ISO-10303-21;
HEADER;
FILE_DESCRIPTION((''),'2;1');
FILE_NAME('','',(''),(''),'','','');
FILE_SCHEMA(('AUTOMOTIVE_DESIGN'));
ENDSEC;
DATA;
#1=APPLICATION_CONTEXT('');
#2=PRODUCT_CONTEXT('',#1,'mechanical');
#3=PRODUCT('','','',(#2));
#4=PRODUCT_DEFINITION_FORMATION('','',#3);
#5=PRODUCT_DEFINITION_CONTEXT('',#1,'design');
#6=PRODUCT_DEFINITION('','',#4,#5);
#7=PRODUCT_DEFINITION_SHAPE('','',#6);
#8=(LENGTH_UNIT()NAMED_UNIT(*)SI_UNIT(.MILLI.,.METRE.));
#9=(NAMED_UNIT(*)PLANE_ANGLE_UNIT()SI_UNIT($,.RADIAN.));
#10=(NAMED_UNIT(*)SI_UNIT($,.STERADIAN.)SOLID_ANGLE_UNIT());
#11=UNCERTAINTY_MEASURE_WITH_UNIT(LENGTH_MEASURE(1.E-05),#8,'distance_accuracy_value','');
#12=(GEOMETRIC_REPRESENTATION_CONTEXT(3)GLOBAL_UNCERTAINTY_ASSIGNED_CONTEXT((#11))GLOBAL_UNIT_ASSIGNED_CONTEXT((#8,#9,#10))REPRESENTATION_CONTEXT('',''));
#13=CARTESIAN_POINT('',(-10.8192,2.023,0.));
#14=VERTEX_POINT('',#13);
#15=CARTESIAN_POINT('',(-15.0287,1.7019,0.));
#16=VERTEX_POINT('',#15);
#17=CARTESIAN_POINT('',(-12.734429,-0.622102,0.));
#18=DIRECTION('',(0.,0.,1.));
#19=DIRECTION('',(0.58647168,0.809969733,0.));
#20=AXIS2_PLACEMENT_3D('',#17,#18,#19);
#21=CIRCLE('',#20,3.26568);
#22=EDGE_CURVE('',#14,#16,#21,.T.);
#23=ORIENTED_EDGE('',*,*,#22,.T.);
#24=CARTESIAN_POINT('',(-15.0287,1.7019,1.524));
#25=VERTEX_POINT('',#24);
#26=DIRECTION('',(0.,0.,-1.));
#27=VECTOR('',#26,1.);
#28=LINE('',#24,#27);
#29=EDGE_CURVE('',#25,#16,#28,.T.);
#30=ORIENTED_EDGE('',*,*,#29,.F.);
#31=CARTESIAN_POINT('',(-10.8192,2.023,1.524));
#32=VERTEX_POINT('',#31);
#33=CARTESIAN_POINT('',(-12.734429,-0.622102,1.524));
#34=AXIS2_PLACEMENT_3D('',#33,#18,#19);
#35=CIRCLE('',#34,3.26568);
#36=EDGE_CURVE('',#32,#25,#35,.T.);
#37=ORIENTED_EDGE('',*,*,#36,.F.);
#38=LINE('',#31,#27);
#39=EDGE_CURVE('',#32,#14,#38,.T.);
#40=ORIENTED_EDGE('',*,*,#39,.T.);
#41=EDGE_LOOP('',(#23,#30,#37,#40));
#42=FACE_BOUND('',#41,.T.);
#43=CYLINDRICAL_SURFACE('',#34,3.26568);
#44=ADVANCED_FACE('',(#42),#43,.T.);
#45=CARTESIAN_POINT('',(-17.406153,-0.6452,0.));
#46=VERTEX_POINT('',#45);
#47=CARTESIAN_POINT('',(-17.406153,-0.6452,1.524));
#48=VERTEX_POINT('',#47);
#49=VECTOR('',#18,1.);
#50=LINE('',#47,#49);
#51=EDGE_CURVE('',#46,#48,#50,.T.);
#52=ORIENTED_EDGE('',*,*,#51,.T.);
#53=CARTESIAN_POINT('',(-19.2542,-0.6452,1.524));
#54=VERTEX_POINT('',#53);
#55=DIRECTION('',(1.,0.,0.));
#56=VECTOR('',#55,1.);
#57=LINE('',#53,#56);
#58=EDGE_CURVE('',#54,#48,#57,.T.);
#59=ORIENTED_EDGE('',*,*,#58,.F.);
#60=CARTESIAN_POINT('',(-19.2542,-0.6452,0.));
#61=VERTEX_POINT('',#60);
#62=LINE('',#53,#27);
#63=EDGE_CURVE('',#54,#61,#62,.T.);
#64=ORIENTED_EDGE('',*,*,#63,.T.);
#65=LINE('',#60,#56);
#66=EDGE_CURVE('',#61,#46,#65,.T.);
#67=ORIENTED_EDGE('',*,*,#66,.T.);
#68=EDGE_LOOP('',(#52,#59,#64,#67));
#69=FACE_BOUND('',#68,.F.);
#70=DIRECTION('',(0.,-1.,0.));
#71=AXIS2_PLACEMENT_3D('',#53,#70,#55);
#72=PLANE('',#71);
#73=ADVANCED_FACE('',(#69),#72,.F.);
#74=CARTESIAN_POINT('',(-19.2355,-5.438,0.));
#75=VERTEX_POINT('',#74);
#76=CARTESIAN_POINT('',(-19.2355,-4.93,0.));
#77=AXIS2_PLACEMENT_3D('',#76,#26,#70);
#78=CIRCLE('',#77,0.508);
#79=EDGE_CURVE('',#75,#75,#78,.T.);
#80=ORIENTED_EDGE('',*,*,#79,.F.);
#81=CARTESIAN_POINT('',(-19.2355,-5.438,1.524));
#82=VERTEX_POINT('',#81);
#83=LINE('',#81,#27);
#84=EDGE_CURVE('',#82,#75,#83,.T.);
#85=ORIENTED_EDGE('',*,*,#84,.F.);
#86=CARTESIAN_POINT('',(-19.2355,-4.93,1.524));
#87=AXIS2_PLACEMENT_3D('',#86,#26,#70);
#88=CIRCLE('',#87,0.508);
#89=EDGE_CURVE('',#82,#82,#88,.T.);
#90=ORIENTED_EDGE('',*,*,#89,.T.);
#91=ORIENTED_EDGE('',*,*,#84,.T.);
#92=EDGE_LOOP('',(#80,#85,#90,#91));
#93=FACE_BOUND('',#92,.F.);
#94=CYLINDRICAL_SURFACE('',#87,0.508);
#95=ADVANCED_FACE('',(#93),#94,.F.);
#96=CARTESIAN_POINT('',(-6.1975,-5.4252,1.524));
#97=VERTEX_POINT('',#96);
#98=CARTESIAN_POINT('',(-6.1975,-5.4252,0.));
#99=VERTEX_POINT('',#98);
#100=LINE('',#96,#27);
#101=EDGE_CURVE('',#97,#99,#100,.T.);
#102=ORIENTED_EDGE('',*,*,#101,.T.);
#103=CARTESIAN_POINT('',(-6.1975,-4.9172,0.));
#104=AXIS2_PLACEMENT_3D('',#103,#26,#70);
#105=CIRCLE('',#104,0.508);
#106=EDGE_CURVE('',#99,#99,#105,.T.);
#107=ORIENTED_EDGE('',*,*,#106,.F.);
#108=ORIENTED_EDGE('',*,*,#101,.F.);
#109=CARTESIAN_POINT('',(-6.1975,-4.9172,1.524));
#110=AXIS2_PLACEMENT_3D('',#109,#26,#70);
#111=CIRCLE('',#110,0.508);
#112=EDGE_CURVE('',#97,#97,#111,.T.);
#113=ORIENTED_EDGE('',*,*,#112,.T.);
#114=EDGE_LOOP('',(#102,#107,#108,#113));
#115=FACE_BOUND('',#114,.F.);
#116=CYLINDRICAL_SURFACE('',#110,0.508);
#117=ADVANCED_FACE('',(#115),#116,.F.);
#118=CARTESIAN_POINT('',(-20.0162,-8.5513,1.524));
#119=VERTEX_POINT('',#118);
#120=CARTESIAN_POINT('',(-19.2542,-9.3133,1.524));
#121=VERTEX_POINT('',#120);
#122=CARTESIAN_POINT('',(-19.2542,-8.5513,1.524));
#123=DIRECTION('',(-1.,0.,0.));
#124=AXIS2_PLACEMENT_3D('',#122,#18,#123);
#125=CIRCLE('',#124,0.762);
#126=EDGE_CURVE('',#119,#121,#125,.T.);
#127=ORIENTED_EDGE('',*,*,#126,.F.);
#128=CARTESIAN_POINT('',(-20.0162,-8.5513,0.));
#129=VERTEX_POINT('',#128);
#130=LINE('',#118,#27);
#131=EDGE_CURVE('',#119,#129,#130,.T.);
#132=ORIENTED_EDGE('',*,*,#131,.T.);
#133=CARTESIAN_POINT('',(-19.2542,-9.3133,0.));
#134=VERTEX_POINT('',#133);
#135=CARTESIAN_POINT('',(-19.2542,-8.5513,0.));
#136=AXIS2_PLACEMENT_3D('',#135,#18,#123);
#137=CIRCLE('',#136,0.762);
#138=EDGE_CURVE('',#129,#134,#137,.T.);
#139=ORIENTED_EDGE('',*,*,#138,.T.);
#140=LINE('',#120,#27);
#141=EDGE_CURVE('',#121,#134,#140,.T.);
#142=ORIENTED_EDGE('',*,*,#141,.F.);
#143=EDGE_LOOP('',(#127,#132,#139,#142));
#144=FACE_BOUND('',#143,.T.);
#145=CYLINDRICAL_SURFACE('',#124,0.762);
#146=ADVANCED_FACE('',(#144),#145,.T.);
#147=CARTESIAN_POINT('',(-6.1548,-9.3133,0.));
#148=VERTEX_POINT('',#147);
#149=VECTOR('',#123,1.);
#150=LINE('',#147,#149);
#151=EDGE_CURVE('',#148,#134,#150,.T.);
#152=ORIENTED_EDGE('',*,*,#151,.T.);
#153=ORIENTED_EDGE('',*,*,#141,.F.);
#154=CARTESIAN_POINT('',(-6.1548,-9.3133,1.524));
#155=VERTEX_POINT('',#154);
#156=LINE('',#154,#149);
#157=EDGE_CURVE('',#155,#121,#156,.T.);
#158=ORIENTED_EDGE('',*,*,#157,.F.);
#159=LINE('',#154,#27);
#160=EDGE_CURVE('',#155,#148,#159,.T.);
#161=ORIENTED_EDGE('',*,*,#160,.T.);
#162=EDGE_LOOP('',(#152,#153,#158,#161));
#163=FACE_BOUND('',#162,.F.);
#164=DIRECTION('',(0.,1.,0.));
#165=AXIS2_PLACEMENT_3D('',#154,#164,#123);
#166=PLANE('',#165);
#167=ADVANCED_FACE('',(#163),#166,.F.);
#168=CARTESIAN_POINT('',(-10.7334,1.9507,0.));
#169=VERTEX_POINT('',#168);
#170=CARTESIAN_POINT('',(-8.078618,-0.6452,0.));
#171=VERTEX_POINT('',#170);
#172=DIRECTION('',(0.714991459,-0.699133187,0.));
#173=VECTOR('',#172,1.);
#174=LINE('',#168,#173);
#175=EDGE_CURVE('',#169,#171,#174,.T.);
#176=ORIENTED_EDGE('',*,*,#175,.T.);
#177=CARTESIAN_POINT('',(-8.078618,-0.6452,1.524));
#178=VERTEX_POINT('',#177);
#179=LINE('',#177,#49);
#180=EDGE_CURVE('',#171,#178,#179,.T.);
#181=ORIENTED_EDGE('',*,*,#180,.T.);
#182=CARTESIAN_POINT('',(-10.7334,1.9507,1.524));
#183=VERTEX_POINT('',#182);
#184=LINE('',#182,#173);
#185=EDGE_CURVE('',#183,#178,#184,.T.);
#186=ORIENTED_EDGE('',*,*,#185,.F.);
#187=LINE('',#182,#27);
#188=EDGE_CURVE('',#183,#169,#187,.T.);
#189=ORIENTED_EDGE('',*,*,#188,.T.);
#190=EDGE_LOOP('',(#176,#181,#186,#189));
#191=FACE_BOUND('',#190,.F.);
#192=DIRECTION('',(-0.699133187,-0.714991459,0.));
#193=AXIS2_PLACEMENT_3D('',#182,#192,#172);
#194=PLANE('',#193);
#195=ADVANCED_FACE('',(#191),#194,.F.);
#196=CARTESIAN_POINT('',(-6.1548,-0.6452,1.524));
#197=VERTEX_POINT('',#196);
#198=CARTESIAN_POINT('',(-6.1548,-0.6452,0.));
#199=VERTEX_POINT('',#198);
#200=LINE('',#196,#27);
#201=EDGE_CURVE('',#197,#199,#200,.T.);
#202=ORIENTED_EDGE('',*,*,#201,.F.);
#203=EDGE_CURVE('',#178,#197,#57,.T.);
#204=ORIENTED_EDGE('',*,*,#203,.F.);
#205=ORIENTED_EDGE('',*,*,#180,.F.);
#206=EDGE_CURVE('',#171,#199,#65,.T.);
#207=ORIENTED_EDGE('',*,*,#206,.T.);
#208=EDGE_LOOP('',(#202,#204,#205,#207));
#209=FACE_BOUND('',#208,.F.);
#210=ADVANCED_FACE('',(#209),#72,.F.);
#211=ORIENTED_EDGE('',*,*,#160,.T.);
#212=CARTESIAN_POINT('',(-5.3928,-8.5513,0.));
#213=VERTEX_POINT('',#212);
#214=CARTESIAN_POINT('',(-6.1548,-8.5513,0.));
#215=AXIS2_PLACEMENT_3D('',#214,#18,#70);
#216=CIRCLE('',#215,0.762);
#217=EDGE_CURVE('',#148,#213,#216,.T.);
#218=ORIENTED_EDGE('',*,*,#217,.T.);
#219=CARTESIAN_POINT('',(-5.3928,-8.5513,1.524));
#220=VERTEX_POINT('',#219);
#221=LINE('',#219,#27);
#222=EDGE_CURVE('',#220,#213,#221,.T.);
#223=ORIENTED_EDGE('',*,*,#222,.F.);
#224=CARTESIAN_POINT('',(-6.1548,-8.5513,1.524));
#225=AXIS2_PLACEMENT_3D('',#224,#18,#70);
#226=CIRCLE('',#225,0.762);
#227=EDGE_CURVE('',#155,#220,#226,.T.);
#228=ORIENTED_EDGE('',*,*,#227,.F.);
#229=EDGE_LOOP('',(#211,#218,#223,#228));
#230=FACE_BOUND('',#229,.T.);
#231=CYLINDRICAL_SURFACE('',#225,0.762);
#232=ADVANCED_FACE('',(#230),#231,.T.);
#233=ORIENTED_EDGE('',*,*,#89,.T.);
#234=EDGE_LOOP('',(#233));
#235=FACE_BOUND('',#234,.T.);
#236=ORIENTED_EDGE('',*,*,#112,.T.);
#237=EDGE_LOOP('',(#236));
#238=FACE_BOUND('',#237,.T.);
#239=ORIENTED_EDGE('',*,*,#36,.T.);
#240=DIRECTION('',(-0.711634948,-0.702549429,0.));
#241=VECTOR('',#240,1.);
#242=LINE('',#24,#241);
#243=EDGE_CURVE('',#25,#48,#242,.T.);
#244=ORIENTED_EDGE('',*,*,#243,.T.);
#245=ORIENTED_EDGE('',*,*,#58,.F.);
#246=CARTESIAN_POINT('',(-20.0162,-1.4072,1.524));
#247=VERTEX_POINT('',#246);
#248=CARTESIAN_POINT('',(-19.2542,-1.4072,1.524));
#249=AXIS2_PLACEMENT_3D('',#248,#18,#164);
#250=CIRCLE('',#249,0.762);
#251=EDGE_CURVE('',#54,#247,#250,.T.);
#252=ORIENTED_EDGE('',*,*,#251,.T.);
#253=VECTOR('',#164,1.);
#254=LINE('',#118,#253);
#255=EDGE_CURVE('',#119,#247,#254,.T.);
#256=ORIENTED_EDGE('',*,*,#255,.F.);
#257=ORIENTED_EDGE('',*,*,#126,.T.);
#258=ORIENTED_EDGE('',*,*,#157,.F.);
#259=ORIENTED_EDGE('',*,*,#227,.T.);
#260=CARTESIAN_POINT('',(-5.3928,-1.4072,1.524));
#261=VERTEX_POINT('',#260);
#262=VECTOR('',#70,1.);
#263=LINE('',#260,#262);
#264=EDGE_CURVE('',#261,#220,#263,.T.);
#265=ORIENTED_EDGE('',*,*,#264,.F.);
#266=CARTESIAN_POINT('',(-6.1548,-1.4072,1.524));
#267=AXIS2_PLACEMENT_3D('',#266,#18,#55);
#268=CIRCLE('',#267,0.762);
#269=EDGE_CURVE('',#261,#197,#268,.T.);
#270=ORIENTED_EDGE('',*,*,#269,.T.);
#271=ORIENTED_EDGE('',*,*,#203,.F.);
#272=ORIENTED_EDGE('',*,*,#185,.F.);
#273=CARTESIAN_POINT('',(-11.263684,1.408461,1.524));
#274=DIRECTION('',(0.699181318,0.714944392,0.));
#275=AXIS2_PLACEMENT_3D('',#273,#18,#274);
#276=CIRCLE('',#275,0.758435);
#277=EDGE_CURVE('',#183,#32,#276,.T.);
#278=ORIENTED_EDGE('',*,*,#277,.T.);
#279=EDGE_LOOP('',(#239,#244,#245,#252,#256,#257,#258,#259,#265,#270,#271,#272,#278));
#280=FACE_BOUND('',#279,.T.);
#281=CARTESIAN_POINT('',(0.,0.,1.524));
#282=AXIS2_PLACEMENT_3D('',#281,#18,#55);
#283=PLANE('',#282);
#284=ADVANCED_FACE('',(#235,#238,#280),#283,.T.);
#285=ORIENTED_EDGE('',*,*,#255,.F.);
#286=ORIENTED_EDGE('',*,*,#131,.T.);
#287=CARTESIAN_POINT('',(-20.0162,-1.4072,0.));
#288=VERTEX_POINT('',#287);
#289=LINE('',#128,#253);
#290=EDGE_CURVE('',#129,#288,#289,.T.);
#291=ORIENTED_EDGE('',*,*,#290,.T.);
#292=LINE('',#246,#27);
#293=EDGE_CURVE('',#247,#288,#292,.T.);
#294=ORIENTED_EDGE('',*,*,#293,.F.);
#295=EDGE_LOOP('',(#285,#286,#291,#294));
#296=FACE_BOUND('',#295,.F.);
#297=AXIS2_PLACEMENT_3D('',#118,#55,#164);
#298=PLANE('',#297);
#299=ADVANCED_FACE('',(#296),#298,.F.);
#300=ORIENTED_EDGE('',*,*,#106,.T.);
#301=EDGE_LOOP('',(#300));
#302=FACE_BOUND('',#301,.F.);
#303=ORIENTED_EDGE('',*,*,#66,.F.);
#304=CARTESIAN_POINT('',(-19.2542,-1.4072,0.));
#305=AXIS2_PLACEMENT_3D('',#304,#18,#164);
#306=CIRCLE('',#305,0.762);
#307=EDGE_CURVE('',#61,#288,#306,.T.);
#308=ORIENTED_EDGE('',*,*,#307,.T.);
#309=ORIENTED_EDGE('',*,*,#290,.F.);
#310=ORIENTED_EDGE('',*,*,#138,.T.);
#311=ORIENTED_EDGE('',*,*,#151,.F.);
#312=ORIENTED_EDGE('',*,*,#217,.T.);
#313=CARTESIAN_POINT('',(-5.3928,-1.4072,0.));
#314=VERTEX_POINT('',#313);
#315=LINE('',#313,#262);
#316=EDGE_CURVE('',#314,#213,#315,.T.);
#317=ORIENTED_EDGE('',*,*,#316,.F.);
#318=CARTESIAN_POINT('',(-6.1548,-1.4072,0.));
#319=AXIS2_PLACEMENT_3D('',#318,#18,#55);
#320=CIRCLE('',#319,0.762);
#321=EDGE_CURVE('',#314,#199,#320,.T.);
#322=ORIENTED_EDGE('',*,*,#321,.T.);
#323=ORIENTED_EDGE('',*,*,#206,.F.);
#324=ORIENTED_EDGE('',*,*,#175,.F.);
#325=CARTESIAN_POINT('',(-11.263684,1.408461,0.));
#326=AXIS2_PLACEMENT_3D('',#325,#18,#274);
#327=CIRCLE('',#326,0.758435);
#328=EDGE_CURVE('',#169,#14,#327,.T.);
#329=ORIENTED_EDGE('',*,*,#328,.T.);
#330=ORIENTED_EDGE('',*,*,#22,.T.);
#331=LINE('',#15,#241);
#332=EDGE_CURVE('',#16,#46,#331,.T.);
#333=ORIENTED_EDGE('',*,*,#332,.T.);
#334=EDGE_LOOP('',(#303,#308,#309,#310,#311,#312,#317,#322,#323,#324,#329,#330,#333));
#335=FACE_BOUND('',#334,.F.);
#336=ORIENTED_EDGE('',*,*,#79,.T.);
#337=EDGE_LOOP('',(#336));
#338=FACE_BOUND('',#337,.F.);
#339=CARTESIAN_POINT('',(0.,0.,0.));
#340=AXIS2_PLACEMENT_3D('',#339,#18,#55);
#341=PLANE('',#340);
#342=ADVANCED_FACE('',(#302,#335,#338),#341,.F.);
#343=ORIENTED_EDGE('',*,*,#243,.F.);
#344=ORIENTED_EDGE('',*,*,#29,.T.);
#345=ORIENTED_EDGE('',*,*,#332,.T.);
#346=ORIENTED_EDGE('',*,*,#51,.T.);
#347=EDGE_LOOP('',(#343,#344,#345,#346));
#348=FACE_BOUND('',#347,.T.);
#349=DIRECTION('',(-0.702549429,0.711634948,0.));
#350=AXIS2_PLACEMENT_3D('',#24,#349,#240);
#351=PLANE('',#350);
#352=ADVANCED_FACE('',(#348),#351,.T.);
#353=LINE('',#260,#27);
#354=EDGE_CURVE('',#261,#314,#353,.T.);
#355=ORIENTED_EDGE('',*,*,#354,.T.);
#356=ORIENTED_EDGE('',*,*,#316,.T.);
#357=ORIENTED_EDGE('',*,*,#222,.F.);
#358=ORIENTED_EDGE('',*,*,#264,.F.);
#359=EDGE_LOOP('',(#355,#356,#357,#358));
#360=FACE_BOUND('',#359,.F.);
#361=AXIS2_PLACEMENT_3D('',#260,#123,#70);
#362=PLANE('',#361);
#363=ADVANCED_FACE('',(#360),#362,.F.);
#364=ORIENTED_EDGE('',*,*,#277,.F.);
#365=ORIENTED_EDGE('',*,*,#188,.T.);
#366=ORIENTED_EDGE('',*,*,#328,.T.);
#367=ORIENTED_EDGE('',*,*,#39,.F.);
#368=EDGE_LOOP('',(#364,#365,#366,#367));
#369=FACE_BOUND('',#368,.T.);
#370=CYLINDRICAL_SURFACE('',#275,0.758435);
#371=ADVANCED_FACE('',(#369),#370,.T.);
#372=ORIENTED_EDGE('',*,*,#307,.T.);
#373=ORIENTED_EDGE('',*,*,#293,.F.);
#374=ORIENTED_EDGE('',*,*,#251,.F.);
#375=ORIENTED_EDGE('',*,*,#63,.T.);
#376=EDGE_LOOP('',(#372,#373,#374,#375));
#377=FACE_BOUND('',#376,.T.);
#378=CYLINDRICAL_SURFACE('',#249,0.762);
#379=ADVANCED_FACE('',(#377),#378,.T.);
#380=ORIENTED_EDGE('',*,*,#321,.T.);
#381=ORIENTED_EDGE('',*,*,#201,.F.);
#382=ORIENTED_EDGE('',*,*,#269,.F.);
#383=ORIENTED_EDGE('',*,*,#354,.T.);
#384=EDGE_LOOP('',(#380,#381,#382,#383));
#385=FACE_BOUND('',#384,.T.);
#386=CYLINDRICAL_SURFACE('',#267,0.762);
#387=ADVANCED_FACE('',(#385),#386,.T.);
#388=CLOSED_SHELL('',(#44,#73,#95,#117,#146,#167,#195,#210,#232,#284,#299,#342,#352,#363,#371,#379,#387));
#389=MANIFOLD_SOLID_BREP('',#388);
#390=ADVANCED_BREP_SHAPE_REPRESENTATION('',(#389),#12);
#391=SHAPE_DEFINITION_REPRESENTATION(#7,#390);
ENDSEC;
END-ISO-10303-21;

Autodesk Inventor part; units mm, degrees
ref_plane "YZ Plane" through (0, 0, 0) normal (1, 0, 0) x (0, 1, 0)
ref_plane "XZ Plane" through (0, 0, 0) normal (0, 1, 0) x (-1, 0, 0)
ref_plane "XY Plane" through (0, 0, 0) normal (0, 0, 1) x (1, 0, 0)
sketch "Block1" plane through (0, 0, 0) normal (0, 0, 1) x (1, 0, 0)
  line L0 (-17.5911, -8.406) -> (-17.5911, -2.6569)
  arc A0 (-15.6308, 0.6431) -> (-17.4939, -2.2845) centre (9.5285, -17.4245) ccw
  arc A1 (-17.4939, -2.2845) -> (-17.5911, -2.6569) centre (-16.8291, -2.6569) ccw
  line L1 (-13.0521, -3.6322) -> (-2.9855, -3.6322)
  line L2 (-2.9855, -3.6322) -> (-2.9855, -10.0136)
  line L3 (-2.9855, -10.0136) -> (-13.0521, -10.0136)
  line L4 (-13.0521, -10.0136) -> (-13.0521, -3.6322)
  ellipse E0 centre (-8.0188, -3.6322) end of major axis (-8.0188, -7.4704) minor radius 2.9685
  point P0 (-13.9703, -5.5207)
  point P1 (-17.5911, -2.4593)
  dimension "d111" = 0.762
sketch "Block2" plane through (0, 0, 0) normal (0, 0, 1) x (1, 0, 0)
  line L0 (-7.8958, -2.4967) -> (-7.8958, -8.4058)
  line L1 (-8.6339, -9.168) -> (-16.8291, -9.168)
  ellipse E0 centre (-12.6564, -2.1178) end of major axis (-12.6564, -6.4967) minor radius 3.853 (-9.6585, 0.6329) -> (-15.6415, 0.6509) ccw
  arc A0 (-7.8958, -2.4967) -> (-9.6091, 0.6391) centre (-35.8892, -15.7554) ccw
  line L2 (-17.6018, -8.3981) -> (-17.6018, -2.6491)
  arc A1 (-15.6415, 0.6509) -> (-17.5045, -2.2766) centre (9.5178, -17.4167) ccw
  arc A2 (-17.5045, -2.2766) -> (-17.6018, -2.6491) centre (-16.8398, -2.6491) ccw
  line L3 (-13.0627, -3.6243) -> (-2.9962, -3.6243)
  line L4 (-2.9962, -3.6243) -> (-2.9962, -10.0058)
  line L5 (-2.9962, -10.0058) -> (-13.0627, -10.0058)
  line L6 (-13.0627, -10.0058) -> (-13.0627, -3.6243)
  ellipse E1 centre (-8.0295, -3.6243) end of major axis (-8.0295, -7.4625) minor radius 2.9685
  point P0 (-12.2397, -5.1213)
sketch "Block3" plane through (0, 0, 0) normal (0, 0, 1) x (1, 0, 0)
  arc A0 (-17.5911, -8.406) -> (-16.8291, -9.168) centre (-16.8291, -8.406) ccw
  arc A1 (-8.6339, -9.168) -> (-7.8719, -8.406) centre (-8.6339, -8.406) ccw
  line L0 (-7.8958, -2.4967) -> (-7.8958, -8.4058)
  line L1 (-8.6339, -9.168) -> (-16.8291, -9.168)
  ellipse E0 centre (-12.6564, -2.1178) end of major axis (-12.6564, -6.4967) minor radius 3.853 (-9.6585, 0.6329) -> (-15.6415, 0.6509) ccw
  arc A2 (-7.8958, -2.4967) -> (-9.6091, 0.6391) centre (-35.8892, -15.7554) ccw
  line L2 (-17.6018, -8.3981) -> (-17.6018, -2.6491)
  arc A3 (-15.6415, 0.6509) -> (-17.5045, -2.2766) centre (9.5178, -17.4167) ccw
  arc A4 (-17.5045, -2.2766) -> (-17.6018, -2.6491) centre (-16.8398, -2.6491) ccw
  line L3 (-13.0627, -3.6243) -> (-2.9962, -3.6243)
  line L4 (-2.9962, -3.6243) -> (-2.9962, -10.0058)
  line L5 (-2.9962, -10.0058) -> (-13.0627, -10.0058)
  line L6 (-13.0627, -10.0058) -> (-13.0627, -3.6243)
  ellipse E1 centre (-8.0295, -3.6243) end of major axis (-8.0295, -7.4625) minor radius 2.9685
  point P0 (-12.6868, -8.3844)
  dimension "d110" = 0.762
sketch "Block4" plane through (0, 0, 0) normal (0, 0, 1) x (1, 0, 0)
  arc A0 (-17.5911, -8.406) -> (-16.8291, -9.168) centre (-16.8291, -8.406) ccw
  arc A1 (-8.6339, -9.168) -> (-7.8719, -8.406) centre (-8.6339, -8.406) ccw
  line L0 (-7.8958, -2.4967) -> (-7.8958, -8.4058)
  line L1 (-8.6339, -9.168) -> (-16.8291, -9.168)
  ellipse E0 centre (-12.6564, -2.1178) end of major axis (-12.6564, -6.4967) minor radius 3.853 (-9.6585, 0.6329) -> (-15.6415, 0.6509) ccw
  arc A2 (-7.8958, -2.4967) -> (-9.6091, 0.6391) centre (-35.8892, -15.7554) ccw
  line L2 (-17.6018, -8.3981) -> (-17.6018, -2.6491)
  arc A3 (-15.6415, 0.6509) -> (-17.5045, -2.2766) centre (9.5178, -17.4167) ccw
  arc A4 (-17.5045, -2.2766) -> (-17.6018, -2.6491) centre (-16.8398, -2.6491) ccw
  line L3 (-13.0627, -3.6243) -> (-2.9962, -3.6243)
  line L4 (-2.9962, -3.6243) -> (-2.9962, -10.0058)
  line L5 (-2.9962, -10.0058) -> (-13.0627, -10.0058)
  line L6 (-13.0627, -10.0058) -> (-13.0627, -3.6243)
  ellipse E1 centre (-8.0295, -3.6243) end of major axis (-8.0295, -7.4625) minor radius 2.9685
  point P0 (-12.6868, -8.3844)
sketch "Block5" plane through (0, 0, 0) normal (0, 0, 1) x (1, 0, 0)
  ellipse E0 centre (-12.7876, -1.8459) end of major axis (-12.7876, -5.6516) minor radius 3.3457 (-10.6846, 1.114) -> (-14.8941, 1.1109) ccw
  arc A0 (-15.6984, 0.3796) -> (-14.8859, 1.1184) centre (-85.8065, 78.298) ccw
  arc A1 (-10.6894, 1.1184) -> (-9.8669, 0.3716) centre (60.1779, 78.3469) ccw
  point P0 (-12.7899, 8.9309)
sketch "Block6" plane through (0, 0, 0) normal (0, 0, 1) x (1, 0, 0)
  arc A0 (-10.9697, 1.4333) -> (-15.1792, 1.1122) centre (-12.8849, -1.2117) ccw
  line L0 (-15.1792, 1.1122) -> (-17.7718, -1.4473)
  line L1 (-10.8839, 1.361) -> (-8.0119, -1.4473)
  line L2 (-17.7718, -1.4473) -> (-8.0119, -1.4473)
  arc A1 (-10.8839, 1.361) -> (-10.9697, 1.4333) centre (-11.4166, 0.8161) ccw
  point P0 (-12.0633, -0.3449)
  point P1 (-10.9214, 1.3977)
  dimension "d153" = 0.762
sketch "Sketch1" plane through (0, 0, 0) normal (0, 0, 1) x (1, 0, 0)
  line L0 (-19.9256, -1.4064) -> (-6.1106, -1.4064)
  line L1 (-6.1106, -1.4064) -> (-6.1106, -8.6156)
  line L2 (-6.1106, -8.6156) -> (-19.9256, -8.6156)
  line L3 (-19.9256, -8.6156) -> (-19.9256, -1.4064)
extrude "Extrusion1" add sketch "Sketch1" along normal blind 1.524
sketch "Sketch13" plane through (0, 0, 1.524) normal (0, 0, 1) x (1, 0, 0)
  arc A0 (-10.8192, 2.023) -> (-15.0287, 1.7019) centre (-12.7344, -0.622) ccw
  line L0 (-15.0287, 1.7019) -> (-17.6213, -0.8576)
  line L1 (-10.7334, 1.9507) -> (-7.8614, -0.8576)
  line L2 (-17.6213, -0.8576) -> (-7.8614, -0.8576)
  arc A1 (-10.7334, 1.9507) -> (-10.8192, 2.023) centre (-11.2661, 1.4058) ccw
  point P0 (0, 0)
  point P1 (0, 0)
  point P2 (0, 0)
extrude "Extrusion8" add sketch "Sketch13" against normal blind 1.524
sketch "Sketch16" plane through (0, 0, 1.524) normal (0, 0, 1) x (1, 0, 0)
  line L0 (-19.2542, -0.6452) -> (-6.1548, -0.6452)
  line L1 (-5.3928, -1.4072) -> (-5.3928, -8.5513)
  line L2 (-6.1548, -9.3133) -> (-19.2542, -9.3133)
  line L3 (-20.0162, -8.5513) -> (-20.0162, -1.4072)
  arc A0 (-19.2542, -0.6452) -> (-20.0162, -1.4072) centre (-19.2542, -1.4072) ccw
  arc A1 (-20.0162, -8.5513) -> (-19.2542, -9.3133) centre (-19.2542, -8.5513) ccw
  arc A2 (-6.1548, -9.3133) -> (-5.3928, -8.5513) centre (-6.1548, -8.5513) ccw
  arc A3 (-5.3928, -1.4072) -> (-6.1548, -0.6452) centre (-6.1548, -1.4072) ccw
  point P0 (0, 0)
  dimension "d177" = 0.762
  dimension "d178" = 0.762
  dimension "d179" = 0.762
  dimension "d180" = 0.762
extrude "Extrusion9" add sketch "Sketch16" against normal blind 1.524
hole "Hole9" at (-19.2355, -4.93, 1.524) direction (0, 0, -1) diameter 1.016 depth 1.524
hole "Hole10" at (-6.1975, -4.9172, 1.524) direction (0, 0, -1) diameter 1.016 depth 1.524
properties part number "headplateLP_protector"
